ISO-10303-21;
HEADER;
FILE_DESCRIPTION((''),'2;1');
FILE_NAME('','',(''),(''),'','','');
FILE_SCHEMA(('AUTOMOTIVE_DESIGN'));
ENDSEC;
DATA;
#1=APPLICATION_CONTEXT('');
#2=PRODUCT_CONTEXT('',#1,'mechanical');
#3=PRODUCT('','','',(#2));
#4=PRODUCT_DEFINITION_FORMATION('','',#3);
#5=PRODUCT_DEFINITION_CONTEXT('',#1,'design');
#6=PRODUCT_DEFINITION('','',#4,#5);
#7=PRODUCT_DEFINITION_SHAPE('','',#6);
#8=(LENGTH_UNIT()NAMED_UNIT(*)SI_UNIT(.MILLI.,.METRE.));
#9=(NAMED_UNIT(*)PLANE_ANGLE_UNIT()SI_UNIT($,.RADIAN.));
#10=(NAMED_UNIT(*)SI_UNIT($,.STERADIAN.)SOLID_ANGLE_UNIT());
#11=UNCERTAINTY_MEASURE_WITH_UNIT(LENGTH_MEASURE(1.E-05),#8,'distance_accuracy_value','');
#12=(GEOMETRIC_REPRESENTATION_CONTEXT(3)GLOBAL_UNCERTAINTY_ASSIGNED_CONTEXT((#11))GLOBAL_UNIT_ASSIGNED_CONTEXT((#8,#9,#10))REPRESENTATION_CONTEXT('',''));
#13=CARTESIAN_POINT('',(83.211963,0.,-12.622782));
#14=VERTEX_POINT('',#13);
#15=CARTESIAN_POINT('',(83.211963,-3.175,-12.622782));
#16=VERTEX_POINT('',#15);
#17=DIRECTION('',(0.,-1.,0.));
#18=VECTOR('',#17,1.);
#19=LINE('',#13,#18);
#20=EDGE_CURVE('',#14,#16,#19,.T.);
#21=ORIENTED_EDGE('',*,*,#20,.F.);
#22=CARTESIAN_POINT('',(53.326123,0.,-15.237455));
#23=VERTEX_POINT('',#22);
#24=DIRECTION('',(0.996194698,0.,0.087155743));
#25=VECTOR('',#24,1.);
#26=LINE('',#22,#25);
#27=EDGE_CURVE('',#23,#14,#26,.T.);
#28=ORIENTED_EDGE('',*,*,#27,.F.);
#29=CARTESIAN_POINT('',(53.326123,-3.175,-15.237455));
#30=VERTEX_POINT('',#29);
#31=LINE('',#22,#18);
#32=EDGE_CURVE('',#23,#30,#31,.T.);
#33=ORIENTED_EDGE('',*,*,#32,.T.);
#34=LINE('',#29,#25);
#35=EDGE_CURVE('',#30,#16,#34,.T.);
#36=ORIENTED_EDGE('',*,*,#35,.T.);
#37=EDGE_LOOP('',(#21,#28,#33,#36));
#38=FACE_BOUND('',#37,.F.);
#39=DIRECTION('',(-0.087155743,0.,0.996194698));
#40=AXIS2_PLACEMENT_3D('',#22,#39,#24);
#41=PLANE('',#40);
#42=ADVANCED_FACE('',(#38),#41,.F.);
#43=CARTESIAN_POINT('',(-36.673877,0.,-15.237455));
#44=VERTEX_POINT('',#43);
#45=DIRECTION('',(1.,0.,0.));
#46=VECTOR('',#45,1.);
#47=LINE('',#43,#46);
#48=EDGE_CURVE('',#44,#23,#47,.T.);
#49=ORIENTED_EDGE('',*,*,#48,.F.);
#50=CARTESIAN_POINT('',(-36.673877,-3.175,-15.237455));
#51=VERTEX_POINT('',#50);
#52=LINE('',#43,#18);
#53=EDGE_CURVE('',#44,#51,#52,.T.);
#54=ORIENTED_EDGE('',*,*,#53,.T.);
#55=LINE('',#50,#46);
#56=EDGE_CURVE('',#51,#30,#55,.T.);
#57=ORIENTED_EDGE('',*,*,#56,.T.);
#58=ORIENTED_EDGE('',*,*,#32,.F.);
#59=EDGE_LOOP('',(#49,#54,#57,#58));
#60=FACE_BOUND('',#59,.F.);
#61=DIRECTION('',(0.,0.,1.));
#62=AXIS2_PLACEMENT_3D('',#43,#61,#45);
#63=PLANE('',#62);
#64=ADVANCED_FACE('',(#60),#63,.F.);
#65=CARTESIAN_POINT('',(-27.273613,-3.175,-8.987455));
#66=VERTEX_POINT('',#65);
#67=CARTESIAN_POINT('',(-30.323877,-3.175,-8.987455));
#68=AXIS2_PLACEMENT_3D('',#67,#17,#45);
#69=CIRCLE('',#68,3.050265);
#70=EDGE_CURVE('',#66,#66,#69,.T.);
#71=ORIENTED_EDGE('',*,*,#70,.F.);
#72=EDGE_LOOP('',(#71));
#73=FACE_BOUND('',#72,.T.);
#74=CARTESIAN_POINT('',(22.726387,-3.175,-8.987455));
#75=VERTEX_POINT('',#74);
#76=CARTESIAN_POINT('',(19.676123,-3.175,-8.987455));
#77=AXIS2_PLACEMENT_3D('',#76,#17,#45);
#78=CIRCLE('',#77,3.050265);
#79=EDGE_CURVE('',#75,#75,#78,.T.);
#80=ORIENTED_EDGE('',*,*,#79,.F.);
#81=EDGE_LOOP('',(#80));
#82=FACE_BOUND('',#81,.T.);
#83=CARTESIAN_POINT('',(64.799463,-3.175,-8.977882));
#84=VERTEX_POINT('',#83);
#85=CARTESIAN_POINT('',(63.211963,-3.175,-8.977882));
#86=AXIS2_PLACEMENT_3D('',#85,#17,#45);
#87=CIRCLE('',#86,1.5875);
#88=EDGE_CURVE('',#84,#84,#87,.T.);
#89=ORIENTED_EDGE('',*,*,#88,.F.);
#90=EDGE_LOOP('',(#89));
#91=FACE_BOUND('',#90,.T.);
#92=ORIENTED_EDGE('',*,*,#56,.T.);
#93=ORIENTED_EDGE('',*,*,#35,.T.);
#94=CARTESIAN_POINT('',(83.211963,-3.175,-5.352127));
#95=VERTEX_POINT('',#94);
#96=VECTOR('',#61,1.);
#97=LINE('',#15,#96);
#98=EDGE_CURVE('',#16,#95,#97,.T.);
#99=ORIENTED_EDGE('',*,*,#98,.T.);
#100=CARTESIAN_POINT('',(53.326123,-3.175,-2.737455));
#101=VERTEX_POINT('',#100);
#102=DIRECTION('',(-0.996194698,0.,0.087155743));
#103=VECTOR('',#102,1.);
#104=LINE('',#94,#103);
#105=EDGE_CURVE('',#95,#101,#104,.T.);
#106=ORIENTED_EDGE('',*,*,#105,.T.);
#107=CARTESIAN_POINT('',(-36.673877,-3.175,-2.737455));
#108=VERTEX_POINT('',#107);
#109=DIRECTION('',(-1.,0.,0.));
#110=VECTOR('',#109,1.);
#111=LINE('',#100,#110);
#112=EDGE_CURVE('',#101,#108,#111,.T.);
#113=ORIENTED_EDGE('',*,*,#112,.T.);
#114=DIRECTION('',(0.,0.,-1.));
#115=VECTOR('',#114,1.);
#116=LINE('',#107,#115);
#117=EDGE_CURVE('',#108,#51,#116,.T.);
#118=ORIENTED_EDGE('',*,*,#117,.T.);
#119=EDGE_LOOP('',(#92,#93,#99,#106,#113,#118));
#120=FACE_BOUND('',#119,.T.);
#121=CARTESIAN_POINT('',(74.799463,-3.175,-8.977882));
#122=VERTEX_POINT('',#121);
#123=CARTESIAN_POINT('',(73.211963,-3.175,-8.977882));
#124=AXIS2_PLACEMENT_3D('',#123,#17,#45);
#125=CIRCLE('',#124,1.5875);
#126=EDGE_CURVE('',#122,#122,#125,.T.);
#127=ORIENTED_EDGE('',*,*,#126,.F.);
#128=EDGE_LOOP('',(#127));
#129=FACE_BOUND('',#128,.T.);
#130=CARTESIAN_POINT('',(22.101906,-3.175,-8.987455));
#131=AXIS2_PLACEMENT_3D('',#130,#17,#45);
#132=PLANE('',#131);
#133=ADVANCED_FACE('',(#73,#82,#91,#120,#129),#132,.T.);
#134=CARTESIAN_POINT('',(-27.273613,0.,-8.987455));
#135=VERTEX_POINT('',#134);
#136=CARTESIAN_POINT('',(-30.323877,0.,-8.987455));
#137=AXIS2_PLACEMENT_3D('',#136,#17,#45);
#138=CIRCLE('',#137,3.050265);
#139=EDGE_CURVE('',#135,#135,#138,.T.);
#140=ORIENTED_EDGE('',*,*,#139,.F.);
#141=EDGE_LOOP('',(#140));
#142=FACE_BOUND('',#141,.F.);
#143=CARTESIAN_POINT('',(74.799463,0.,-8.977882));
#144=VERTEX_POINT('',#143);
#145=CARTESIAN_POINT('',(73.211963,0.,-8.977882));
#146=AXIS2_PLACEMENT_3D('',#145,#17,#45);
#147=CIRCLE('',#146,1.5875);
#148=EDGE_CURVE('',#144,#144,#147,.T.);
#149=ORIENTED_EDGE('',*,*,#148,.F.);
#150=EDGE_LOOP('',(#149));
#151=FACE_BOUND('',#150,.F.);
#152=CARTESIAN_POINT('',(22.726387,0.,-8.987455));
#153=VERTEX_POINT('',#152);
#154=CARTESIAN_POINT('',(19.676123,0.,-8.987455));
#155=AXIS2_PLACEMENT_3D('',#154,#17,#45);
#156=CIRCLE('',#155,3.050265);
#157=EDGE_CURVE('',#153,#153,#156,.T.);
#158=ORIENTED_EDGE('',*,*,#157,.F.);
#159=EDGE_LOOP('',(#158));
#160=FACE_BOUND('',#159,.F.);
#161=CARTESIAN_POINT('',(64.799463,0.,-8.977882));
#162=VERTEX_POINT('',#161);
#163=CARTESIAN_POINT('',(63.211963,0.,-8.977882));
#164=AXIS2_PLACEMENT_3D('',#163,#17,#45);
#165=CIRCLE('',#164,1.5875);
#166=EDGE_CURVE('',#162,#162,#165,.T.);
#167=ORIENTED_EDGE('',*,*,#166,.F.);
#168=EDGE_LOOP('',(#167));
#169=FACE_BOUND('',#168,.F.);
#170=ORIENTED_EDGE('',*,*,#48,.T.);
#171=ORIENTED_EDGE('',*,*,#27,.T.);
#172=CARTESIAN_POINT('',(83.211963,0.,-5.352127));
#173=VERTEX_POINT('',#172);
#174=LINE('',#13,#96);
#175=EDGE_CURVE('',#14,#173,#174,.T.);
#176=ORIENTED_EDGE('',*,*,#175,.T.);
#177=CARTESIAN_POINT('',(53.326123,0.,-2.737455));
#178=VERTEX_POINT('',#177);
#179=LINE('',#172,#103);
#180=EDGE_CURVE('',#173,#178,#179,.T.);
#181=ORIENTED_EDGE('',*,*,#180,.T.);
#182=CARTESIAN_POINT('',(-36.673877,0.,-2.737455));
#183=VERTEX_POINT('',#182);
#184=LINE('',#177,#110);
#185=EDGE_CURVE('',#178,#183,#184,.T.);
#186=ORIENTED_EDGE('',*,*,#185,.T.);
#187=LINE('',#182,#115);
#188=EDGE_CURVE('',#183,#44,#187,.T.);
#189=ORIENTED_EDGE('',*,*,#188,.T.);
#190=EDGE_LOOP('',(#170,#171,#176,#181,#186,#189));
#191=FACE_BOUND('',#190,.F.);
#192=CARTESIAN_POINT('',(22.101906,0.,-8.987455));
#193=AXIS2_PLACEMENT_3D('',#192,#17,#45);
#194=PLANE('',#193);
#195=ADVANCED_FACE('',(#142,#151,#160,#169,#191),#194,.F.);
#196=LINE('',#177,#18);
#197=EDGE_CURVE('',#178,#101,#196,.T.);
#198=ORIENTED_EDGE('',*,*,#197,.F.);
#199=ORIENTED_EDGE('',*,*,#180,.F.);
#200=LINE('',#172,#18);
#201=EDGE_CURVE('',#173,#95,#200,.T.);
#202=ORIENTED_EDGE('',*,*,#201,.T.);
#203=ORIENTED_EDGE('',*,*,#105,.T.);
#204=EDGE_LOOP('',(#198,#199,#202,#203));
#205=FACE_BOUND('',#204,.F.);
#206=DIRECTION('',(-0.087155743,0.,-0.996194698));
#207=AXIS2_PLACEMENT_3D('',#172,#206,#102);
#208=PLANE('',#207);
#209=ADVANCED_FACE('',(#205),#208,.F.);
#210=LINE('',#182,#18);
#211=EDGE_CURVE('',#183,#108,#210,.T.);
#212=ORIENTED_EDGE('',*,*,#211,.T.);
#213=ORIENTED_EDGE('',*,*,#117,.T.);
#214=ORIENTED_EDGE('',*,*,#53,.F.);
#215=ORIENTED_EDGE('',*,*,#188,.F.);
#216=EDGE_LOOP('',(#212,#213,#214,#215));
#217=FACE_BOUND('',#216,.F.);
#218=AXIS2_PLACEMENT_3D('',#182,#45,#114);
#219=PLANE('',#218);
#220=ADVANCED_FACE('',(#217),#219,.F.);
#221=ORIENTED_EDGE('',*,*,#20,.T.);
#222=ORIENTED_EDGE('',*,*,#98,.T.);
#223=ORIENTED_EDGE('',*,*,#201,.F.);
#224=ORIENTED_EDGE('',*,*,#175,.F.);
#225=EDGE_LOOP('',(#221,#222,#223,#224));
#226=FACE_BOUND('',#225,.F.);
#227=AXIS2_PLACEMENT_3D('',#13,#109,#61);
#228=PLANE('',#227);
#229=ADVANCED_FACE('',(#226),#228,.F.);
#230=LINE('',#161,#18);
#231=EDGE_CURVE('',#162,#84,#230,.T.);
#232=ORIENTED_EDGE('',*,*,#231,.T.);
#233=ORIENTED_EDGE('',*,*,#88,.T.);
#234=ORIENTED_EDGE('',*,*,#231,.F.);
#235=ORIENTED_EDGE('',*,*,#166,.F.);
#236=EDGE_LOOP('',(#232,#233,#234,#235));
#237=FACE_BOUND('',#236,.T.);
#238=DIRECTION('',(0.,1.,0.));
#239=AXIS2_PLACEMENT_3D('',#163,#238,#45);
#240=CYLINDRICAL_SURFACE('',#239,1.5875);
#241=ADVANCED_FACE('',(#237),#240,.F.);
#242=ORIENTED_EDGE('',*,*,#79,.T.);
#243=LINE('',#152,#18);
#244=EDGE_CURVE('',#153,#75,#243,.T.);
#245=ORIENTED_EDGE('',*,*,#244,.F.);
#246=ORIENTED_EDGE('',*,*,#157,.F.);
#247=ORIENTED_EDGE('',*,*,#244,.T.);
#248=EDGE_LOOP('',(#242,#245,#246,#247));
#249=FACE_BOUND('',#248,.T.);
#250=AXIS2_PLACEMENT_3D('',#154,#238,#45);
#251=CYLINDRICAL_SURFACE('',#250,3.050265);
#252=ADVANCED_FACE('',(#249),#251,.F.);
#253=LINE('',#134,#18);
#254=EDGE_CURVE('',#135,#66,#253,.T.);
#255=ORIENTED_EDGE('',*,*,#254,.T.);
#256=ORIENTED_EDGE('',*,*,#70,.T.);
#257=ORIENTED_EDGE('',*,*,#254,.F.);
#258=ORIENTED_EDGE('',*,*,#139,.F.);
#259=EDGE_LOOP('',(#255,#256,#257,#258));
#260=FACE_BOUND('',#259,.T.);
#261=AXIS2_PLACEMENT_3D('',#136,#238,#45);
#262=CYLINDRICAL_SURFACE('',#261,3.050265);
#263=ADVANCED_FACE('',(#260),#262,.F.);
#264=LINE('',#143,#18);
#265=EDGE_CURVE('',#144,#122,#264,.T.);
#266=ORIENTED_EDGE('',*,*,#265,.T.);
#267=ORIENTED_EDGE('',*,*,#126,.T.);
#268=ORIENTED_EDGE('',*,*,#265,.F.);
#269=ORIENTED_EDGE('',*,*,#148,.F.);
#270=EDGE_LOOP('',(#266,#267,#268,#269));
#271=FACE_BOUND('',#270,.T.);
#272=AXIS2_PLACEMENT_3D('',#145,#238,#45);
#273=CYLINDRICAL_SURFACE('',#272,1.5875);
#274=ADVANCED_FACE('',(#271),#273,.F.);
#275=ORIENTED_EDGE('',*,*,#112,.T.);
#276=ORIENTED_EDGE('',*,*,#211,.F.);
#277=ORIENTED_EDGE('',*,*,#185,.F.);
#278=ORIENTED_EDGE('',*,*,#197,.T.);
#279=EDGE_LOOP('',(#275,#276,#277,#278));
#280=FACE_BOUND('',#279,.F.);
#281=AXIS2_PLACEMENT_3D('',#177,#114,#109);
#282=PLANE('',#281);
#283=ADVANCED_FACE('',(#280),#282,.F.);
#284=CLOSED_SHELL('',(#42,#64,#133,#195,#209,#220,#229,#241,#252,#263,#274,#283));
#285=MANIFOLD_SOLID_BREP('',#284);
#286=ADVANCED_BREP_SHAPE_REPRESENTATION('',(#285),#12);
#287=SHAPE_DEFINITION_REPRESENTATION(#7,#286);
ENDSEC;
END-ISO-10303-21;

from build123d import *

# Parameters (mm, degrees)
F0_R     = 3.0502649117
F0_R_2   = 1.5875
F1_DEPTH = 3.175


# Not quite as in the source:
# - a length typed as a fraction of an inch, garbled in the dataset ("3 / 203.2 mm" for 3/8 in), is restored


with BuildPart() as f1:
    # F0 (on Front) → F1 (new body)
    with BuildSketch(Plane.XZ):
        Polygon((53.3261225373, -2.7374546753), (-36.6738774627, -2.7374546753), (-36.6738774627, -15.2374546753), (53.3261225373, -15.2374546753), (83.21196348, -12.6227823928), (83.21196348, -8.9778823928), (83.21196348, -5.3521269577), align=None)
        with Locations((-30.3238774627, -8.9874546753)):
            Circle(F0_R, mode=Mode.SUBTRACT)
        with Locations((19.6761225373, -8.9874546753)):
            Circle(F0_R, mode=Mode.SUBTRACT)
        with Locations((63.21196348, -8.9778823928)):
            Circle(F0_R_2, mode=Mode.SUBTRACT)
        with Locations((73.21196348, -8.9778823928)):
            Circle(F0_R_2, mode=Mode.SUBTRACT)
    extrude(amount=F1_DEPTH)


solid = f1.part
